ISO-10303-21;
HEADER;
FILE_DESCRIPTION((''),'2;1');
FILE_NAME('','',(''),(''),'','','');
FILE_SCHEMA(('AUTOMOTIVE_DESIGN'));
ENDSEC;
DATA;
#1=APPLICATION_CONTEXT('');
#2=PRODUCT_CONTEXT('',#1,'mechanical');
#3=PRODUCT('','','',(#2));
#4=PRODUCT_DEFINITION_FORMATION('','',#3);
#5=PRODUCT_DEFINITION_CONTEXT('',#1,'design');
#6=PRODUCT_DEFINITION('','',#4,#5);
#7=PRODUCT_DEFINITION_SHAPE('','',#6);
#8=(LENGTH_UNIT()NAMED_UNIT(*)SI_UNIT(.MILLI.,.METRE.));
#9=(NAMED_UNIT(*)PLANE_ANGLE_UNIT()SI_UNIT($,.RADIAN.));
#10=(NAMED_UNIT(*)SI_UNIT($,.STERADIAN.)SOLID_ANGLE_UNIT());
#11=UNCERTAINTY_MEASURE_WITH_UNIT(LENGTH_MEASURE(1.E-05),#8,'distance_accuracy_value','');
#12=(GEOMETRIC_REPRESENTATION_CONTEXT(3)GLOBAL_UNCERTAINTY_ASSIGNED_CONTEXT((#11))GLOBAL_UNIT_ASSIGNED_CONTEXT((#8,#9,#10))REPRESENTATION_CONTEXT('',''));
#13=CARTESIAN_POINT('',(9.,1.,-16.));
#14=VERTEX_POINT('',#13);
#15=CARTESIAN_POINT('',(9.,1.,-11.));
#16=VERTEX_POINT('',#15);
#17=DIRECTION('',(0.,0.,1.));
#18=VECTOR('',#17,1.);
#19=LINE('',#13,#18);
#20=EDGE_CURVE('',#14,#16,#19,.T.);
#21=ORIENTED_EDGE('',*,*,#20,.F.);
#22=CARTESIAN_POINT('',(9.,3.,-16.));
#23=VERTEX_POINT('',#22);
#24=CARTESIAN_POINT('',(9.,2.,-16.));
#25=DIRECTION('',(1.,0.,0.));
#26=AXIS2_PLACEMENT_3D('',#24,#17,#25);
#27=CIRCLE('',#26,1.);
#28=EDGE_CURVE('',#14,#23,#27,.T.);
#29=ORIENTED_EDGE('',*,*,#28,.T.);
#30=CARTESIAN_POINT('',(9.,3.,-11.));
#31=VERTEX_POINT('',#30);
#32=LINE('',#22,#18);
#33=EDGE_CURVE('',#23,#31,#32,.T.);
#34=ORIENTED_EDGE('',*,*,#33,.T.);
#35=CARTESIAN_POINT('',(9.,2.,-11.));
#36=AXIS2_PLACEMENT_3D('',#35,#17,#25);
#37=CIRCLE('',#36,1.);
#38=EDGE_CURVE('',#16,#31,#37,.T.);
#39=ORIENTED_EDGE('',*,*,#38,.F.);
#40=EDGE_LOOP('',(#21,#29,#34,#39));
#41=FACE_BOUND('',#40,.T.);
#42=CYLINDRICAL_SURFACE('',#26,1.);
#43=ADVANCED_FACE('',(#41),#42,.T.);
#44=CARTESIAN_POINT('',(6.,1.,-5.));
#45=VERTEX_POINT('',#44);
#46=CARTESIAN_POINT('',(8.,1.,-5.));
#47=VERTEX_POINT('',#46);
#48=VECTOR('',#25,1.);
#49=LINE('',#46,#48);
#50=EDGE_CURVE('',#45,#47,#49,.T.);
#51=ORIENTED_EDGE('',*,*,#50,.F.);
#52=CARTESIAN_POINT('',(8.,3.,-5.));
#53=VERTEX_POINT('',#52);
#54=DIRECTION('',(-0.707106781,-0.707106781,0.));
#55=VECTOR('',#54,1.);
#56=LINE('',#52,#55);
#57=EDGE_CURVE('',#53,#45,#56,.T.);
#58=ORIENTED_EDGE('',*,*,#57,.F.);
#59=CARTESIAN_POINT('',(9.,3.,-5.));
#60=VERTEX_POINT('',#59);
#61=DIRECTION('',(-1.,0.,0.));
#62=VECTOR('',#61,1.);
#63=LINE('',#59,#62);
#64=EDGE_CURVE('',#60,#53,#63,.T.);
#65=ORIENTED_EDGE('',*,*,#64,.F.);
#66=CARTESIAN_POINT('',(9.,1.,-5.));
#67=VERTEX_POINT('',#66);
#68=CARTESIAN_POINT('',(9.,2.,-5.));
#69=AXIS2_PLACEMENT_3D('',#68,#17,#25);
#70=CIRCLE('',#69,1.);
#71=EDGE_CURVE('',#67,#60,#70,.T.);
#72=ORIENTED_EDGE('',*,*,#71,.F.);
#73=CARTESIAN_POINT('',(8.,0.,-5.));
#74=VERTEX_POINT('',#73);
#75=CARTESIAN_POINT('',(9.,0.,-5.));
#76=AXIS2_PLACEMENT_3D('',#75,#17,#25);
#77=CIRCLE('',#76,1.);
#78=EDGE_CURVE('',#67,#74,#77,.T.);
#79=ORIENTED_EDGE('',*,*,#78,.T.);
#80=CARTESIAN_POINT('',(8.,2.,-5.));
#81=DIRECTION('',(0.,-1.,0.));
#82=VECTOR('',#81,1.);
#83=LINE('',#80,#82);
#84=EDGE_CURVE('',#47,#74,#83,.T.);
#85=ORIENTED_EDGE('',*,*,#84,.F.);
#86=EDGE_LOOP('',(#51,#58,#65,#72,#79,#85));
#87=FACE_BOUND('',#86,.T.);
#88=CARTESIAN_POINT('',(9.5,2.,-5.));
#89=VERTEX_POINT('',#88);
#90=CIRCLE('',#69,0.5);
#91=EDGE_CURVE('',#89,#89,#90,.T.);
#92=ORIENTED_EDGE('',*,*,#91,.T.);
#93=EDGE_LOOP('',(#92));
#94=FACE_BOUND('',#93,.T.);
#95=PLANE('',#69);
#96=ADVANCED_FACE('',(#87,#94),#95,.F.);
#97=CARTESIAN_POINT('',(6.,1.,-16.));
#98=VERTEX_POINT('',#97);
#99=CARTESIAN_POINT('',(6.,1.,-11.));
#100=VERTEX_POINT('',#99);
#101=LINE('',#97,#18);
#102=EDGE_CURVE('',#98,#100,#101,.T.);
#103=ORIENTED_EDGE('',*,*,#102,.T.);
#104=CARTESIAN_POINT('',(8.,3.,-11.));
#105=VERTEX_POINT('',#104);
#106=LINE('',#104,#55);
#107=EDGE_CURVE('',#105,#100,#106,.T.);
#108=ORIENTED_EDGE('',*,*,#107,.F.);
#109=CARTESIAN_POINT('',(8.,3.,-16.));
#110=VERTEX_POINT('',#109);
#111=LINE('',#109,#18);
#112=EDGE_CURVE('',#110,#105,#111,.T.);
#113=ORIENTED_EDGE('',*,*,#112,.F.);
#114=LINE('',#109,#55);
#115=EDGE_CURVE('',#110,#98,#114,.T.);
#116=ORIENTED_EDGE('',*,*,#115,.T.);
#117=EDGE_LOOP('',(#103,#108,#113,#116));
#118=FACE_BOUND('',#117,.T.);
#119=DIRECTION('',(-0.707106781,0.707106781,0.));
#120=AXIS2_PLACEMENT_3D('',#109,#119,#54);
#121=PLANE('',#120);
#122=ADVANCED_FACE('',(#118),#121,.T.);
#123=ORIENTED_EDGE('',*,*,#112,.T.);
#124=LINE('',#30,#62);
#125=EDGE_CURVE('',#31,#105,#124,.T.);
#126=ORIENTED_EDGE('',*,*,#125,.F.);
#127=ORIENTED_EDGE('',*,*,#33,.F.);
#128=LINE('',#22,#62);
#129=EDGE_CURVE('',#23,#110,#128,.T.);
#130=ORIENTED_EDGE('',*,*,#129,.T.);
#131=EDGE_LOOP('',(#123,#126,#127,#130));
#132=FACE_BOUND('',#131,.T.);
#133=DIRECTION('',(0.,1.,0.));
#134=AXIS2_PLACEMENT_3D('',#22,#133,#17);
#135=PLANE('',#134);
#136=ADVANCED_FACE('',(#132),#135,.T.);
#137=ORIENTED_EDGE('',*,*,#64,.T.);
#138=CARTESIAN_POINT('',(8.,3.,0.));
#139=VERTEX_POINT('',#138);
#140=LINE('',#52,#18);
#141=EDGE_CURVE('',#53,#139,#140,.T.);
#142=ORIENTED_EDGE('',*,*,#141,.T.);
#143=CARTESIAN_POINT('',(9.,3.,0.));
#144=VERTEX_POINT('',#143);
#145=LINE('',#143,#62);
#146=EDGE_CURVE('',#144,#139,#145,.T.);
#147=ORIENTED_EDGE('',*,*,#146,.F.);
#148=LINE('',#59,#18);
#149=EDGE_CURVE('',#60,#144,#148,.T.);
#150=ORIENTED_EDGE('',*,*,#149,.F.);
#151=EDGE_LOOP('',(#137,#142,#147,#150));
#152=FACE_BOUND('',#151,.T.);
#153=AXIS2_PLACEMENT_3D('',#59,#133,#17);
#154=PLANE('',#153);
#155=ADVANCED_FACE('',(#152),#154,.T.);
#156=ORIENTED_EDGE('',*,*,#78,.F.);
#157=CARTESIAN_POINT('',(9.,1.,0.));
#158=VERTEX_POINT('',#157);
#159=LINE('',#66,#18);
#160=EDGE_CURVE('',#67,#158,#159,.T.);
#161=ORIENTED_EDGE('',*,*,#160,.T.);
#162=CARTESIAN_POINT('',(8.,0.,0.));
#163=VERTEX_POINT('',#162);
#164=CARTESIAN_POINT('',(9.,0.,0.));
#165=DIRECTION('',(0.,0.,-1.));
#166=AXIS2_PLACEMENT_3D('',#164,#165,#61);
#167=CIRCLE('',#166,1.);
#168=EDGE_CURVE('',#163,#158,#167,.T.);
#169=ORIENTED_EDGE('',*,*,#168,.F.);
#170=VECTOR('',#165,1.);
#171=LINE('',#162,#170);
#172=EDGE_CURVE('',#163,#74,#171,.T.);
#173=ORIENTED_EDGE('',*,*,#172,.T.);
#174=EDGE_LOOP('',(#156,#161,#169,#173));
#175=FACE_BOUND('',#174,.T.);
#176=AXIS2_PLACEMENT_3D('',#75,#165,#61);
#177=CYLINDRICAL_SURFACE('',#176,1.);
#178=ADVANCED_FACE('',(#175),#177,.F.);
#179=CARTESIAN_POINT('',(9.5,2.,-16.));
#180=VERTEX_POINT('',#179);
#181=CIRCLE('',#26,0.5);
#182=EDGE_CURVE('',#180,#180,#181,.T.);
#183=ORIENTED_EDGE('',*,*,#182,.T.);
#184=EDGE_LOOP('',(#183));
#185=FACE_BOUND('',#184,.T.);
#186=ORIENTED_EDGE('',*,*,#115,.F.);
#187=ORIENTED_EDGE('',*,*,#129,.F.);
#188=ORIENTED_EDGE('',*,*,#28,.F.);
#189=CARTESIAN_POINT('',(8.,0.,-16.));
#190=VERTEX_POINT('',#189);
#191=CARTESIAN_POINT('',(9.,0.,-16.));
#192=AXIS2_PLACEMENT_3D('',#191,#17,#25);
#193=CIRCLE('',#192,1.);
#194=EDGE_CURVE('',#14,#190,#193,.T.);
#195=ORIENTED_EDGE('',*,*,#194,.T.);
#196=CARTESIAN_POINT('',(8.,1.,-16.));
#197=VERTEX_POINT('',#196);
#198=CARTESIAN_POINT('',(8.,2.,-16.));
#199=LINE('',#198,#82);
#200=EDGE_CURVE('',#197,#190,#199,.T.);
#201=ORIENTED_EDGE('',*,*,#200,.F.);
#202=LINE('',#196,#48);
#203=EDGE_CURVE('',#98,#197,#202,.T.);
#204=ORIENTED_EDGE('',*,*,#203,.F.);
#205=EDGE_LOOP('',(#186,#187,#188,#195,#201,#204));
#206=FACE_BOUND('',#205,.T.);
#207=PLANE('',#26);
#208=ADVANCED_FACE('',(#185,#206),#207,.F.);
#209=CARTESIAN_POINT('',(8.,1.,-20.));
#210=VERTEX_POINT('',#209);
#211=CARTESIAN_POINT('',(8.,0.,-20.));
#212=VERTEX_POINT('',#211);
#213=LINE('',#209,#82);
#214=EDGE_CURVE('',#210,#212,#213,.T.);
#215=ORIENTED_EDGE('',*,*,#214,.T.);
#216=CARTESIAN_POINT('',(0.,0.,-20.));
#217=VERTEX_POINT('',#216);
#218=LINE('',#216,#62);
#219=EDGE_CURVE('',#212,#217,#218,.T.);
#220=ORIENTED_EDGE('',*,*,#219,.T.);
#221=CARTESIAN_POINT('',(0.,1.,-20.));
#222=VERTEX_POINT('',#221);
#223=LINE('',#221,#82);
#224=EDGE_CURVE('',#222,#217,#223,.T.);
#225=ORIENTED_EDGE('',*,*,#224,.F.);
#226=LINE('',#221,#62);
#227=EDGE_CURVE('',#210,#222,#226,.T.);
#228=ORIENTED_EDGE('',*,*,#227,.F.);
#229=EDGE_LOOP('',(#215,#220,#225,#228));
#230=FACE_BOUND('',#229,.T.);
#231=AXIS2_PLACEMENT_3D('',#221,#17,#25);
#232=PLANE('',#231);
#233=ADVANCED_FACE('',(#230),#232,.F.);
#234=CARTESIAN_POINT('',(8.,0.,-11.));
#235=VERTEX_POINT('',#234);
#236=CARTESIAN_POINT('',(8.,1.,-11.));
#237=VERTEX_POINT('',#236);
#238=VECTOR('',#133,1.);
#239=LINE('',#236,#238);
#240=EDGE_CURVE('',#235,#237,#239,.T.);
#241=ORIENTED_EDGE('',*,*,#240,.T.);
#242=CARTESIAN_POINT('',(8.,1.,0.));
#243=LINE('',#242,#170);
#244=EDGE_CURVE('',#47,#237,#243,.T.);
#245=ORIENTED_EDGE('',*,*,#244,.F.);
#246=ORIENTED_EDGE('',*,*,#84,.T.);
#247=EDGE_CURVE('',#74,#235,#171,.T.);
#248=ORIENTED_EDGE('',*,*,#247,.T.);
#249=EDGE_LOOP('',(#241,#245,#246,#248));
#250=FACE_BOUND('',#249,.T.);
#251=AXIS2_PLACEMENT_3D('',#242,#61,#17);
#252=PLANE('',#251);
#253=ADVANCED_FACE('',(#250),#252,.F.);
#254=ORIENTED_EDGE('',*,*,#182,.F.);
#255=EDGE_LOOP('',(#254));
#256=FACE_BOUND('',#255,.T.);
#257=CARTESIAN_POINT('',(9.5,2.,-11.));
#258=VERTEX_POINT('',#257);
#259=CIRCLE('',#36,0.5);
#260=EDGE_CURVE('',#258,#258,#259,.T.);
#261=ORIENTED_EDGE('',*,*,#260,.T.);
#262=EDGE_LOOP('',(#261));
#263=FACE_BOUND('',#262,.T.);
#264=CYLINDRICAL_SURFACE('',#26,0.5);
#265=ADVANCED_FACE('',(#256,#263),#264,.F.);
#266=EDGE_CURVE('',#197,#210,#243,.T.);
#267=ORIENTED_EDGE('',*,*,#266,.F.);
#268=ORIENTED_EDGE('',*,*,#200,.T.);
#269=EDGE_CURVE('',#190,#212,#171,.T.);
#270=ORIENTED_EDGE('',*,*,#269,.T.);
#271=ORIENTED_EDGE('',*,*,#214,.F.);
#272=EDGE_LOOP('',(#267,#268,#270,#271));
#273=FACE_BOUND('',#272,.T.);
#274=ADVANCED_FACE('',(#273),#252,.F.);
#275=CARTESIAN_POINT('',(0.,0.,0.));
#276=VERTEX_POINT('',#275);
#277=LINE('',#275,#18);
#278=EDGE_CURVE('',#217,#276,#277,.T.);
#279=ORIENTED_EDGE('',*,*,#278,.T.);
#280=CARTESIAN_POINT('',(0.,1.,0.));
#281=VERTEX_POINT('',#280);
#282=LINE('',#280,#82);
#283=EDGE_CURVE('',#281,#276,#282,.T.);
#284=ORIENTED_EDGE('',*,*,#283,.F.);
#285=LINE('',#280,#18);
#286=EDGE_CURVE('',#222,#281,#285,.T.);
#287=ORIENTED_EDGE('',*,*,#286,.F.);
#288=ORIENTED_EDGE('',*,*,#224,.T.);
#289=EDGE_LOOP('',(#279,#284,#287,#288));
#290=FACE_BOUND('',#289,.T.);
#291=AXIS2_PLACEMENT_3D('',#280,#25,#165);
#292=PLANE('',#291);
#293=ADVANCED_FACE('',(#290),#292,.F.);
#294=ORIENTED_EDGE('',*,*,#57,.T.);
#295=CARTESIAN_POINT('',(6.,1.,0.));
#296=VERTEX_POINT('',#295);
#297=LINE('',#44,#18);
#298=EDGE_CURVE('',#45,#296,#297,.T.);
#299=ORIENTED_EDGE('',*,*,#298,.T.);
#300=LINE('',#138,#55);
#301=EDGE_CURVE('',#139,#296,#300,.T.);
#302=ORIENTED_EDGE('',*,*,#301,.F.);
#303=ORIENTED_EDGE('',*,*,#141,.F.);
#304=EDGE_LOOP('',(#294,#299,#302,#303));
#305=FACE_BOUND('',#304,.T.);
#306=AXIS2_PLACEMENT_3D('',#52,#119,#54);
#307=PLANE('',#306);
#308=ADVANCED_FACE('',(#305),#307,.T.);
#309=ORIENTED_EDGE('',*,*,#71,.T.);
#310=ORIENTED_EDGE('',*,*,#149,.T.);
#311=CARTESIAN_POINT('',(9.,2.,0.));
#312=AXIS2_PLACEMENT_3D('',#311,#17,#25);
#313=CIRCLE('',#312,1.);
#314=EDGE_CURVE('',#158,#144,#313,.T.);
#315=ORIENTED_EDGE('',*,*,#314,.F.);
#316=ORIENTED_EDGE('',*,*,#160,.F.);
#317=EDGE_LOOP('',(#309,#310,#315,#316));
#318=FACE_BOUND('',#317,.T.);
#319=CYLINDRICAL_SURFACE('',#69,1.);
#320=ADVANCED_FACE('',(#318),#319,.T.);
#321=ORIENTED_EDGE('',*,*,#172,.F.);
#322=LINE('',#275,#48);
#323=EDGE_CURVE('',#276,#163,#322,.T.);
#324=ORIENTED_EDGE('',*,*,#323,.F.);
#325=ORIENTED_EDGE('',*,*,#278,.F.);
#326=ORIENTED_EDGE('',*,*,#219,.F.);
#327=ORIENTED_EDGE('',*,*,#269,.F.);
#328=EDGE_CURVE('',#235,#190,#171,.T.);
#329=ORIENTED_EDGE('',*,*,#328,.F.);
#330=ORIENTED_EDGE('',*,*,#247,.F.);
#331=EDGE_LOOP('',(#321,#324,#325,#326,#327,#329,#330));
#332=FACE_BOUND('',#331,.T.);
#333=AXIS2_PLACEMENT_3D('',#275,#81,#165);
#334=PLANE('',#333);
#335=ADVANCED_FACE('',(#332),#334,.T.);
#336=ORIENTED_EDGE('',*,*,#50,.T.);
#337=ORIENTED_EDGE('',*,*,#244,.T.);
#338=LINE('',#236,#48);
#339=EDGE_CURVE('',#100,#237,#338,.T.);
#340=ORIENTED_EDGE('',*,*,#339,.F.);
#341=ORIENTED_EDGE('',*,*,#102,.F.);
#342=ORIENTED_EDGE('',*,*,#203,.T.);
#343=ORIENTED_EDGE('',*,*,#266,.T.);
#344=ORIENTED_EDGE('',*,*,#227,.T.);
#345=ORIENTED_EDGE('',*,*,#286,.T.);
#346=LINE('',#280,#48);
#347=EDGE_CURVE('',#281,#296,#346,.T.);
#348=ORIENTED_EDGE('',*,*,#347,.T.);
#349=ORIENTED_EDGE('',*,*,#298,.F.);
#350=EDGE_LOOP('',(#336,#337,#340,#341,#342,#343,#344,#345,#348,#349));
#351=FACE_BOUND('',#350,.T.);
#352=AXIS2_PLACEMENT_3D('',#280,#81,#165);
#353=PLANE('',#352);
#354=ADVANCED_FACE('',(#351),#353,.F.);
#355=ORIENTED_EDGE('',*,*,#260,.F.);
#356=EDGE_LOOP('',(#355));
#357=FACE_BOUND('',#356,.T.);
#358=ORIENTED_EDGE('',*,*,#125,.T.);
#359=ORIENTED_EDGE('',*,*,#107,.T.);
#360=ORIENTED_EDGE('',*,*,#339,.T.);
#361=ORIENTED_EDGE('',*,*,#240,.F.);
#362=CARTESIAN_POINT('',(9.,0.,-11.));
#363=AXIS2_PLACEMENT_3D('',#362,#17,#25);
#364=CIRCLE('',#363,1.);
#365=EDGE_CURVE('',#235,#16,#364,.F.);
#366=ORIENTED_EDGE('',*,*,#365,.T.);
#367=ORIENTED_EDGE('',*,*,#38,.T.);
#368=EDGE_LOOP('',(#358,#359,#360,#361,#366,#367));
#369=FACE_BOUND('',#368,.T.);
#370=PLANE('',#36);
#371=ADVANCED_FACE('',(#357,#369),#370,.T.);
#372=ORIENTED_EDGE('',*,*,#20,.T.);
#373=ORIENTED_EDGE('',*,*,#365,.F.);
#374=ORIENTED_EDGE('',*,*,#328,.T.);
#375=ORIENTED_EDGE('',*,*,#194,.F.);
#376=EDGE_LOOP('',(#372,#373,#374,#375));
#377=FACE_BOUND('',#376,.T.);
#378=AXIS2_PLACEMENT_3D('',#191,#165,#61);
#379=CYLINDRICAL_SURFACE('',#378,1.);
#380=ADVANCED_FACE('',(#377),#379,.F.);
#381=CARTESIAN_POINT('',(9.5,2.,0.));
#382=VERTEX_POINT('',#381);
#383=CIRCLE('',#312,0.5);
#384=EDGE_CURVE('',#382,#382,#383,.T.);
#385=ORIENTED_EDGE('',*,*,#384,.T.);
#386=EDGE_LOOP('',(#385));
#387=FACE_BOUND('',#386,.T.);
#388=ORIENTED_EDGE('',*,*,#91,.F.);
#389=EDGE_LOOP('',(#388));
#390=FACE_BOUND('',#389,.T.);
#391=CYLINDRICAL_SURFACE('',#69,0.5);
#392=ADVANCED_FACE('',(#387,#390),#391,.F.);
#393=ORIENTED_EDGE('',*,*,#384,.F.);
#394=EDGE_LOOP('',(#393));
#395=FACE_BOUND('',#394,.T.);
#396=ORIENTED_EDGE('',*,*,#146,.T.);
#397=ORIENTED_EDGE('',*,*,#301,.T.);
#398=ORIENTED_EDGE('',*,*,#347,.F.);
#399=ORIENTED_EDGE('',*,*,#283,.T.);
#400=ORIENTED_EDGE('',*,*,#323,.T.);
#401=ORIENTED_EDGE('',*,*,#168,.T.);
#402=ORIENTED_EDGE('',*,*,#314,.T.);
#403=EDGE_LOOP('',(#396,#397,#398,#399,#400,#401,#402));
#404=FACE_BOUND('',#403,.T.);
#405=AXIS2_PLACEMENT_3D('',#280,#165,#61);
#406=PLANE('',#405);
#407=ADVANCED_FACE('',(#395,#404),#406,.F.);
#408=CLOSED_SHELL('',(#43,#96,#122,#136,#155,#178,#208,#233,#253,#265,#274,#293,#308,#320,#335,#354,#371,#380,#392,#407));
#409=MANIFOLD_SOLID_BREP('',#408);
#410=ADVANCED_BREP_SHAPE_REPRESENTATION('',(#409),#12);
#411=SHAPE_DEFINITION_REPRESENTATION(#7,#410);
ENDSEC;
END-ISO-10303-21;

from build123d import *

# Parameters (mm, degrees)
SKETCH1_W              = 8
SKETCH1_H              = 20
BOSS_EXTRUDE1_DEPTH    = 1
SKETCH2_R              = 0.5
BOSS_EXTRUDE2_DEPTH    = 5
FILLET1_R              = 1
LPATTERN1_COUNT        = 2
LPATTERN1_PITCH        = 11
FILLET1_OF_LPATTERN1_R = 1


with BuildPart() as part:
    # Sketch1 → Boss-Extrude1 (new body)
    with BuildSketch(Plane(origin=(0, 0, 0), x_dir=(1, 0, 0), z_dir=(0, 1, 0))):
        with Locations((4, 10)):
            Rectangle(SKETCH1_W, SKETCH1_H)
    extrude(amount=BOSS_EXTRUDE1_DEPTH)

    # Sketch2 → Boss-Extrude2 (add)
    with BuildSketch(Plane.XY):
        with BuildLine():
            Line((8, 1), (9, 1))
            ThreePointArc((9, 1), (10, 2), (9, 3))
            Line((9, 3), (8, 3))
            Line((8, 3), (6, 1))
            Line((6, 1), (8, 1))
        make_face()
        with Locations((9, 2)):
            Circle(SKETCH2_R, mode=Mode.SUBTRACT)
    boss_extrude2 = extrude(amount=-BOSS_EXTRUDE2_DEPTH)

    # Fillet1
    fillet1_edges = [part.edges().sort_by_distance(p)[0] for p in [
        (8, 1, -2.5),
    ]]
    fillet(fillet1_edges, radius=FILLET1_R - 0.0001)  # a hair under: the kernel refuses the full size

    # LPattern1: Boss-Extrude2 ×2
    with Locations(*[(0, 0, -i * LPATTERN1_PITCH) for i in range(1, LPATTERN1_COUNT)]):
        add(boss_extrude2)

    # Fillet1 of LPattern1
    fillet1_of_lpattern1_edges = [part.edges().sort_by_distance(p)[0] for p in [
        (8, 1, -13.5),
    ]]
    fillet(fillet1_of_lpattern1_edges, radius=FILLET1_OF_LPATTERN1_R - 0.0001)  # a hair under: the kernel refuses the full size


solid = part.part
